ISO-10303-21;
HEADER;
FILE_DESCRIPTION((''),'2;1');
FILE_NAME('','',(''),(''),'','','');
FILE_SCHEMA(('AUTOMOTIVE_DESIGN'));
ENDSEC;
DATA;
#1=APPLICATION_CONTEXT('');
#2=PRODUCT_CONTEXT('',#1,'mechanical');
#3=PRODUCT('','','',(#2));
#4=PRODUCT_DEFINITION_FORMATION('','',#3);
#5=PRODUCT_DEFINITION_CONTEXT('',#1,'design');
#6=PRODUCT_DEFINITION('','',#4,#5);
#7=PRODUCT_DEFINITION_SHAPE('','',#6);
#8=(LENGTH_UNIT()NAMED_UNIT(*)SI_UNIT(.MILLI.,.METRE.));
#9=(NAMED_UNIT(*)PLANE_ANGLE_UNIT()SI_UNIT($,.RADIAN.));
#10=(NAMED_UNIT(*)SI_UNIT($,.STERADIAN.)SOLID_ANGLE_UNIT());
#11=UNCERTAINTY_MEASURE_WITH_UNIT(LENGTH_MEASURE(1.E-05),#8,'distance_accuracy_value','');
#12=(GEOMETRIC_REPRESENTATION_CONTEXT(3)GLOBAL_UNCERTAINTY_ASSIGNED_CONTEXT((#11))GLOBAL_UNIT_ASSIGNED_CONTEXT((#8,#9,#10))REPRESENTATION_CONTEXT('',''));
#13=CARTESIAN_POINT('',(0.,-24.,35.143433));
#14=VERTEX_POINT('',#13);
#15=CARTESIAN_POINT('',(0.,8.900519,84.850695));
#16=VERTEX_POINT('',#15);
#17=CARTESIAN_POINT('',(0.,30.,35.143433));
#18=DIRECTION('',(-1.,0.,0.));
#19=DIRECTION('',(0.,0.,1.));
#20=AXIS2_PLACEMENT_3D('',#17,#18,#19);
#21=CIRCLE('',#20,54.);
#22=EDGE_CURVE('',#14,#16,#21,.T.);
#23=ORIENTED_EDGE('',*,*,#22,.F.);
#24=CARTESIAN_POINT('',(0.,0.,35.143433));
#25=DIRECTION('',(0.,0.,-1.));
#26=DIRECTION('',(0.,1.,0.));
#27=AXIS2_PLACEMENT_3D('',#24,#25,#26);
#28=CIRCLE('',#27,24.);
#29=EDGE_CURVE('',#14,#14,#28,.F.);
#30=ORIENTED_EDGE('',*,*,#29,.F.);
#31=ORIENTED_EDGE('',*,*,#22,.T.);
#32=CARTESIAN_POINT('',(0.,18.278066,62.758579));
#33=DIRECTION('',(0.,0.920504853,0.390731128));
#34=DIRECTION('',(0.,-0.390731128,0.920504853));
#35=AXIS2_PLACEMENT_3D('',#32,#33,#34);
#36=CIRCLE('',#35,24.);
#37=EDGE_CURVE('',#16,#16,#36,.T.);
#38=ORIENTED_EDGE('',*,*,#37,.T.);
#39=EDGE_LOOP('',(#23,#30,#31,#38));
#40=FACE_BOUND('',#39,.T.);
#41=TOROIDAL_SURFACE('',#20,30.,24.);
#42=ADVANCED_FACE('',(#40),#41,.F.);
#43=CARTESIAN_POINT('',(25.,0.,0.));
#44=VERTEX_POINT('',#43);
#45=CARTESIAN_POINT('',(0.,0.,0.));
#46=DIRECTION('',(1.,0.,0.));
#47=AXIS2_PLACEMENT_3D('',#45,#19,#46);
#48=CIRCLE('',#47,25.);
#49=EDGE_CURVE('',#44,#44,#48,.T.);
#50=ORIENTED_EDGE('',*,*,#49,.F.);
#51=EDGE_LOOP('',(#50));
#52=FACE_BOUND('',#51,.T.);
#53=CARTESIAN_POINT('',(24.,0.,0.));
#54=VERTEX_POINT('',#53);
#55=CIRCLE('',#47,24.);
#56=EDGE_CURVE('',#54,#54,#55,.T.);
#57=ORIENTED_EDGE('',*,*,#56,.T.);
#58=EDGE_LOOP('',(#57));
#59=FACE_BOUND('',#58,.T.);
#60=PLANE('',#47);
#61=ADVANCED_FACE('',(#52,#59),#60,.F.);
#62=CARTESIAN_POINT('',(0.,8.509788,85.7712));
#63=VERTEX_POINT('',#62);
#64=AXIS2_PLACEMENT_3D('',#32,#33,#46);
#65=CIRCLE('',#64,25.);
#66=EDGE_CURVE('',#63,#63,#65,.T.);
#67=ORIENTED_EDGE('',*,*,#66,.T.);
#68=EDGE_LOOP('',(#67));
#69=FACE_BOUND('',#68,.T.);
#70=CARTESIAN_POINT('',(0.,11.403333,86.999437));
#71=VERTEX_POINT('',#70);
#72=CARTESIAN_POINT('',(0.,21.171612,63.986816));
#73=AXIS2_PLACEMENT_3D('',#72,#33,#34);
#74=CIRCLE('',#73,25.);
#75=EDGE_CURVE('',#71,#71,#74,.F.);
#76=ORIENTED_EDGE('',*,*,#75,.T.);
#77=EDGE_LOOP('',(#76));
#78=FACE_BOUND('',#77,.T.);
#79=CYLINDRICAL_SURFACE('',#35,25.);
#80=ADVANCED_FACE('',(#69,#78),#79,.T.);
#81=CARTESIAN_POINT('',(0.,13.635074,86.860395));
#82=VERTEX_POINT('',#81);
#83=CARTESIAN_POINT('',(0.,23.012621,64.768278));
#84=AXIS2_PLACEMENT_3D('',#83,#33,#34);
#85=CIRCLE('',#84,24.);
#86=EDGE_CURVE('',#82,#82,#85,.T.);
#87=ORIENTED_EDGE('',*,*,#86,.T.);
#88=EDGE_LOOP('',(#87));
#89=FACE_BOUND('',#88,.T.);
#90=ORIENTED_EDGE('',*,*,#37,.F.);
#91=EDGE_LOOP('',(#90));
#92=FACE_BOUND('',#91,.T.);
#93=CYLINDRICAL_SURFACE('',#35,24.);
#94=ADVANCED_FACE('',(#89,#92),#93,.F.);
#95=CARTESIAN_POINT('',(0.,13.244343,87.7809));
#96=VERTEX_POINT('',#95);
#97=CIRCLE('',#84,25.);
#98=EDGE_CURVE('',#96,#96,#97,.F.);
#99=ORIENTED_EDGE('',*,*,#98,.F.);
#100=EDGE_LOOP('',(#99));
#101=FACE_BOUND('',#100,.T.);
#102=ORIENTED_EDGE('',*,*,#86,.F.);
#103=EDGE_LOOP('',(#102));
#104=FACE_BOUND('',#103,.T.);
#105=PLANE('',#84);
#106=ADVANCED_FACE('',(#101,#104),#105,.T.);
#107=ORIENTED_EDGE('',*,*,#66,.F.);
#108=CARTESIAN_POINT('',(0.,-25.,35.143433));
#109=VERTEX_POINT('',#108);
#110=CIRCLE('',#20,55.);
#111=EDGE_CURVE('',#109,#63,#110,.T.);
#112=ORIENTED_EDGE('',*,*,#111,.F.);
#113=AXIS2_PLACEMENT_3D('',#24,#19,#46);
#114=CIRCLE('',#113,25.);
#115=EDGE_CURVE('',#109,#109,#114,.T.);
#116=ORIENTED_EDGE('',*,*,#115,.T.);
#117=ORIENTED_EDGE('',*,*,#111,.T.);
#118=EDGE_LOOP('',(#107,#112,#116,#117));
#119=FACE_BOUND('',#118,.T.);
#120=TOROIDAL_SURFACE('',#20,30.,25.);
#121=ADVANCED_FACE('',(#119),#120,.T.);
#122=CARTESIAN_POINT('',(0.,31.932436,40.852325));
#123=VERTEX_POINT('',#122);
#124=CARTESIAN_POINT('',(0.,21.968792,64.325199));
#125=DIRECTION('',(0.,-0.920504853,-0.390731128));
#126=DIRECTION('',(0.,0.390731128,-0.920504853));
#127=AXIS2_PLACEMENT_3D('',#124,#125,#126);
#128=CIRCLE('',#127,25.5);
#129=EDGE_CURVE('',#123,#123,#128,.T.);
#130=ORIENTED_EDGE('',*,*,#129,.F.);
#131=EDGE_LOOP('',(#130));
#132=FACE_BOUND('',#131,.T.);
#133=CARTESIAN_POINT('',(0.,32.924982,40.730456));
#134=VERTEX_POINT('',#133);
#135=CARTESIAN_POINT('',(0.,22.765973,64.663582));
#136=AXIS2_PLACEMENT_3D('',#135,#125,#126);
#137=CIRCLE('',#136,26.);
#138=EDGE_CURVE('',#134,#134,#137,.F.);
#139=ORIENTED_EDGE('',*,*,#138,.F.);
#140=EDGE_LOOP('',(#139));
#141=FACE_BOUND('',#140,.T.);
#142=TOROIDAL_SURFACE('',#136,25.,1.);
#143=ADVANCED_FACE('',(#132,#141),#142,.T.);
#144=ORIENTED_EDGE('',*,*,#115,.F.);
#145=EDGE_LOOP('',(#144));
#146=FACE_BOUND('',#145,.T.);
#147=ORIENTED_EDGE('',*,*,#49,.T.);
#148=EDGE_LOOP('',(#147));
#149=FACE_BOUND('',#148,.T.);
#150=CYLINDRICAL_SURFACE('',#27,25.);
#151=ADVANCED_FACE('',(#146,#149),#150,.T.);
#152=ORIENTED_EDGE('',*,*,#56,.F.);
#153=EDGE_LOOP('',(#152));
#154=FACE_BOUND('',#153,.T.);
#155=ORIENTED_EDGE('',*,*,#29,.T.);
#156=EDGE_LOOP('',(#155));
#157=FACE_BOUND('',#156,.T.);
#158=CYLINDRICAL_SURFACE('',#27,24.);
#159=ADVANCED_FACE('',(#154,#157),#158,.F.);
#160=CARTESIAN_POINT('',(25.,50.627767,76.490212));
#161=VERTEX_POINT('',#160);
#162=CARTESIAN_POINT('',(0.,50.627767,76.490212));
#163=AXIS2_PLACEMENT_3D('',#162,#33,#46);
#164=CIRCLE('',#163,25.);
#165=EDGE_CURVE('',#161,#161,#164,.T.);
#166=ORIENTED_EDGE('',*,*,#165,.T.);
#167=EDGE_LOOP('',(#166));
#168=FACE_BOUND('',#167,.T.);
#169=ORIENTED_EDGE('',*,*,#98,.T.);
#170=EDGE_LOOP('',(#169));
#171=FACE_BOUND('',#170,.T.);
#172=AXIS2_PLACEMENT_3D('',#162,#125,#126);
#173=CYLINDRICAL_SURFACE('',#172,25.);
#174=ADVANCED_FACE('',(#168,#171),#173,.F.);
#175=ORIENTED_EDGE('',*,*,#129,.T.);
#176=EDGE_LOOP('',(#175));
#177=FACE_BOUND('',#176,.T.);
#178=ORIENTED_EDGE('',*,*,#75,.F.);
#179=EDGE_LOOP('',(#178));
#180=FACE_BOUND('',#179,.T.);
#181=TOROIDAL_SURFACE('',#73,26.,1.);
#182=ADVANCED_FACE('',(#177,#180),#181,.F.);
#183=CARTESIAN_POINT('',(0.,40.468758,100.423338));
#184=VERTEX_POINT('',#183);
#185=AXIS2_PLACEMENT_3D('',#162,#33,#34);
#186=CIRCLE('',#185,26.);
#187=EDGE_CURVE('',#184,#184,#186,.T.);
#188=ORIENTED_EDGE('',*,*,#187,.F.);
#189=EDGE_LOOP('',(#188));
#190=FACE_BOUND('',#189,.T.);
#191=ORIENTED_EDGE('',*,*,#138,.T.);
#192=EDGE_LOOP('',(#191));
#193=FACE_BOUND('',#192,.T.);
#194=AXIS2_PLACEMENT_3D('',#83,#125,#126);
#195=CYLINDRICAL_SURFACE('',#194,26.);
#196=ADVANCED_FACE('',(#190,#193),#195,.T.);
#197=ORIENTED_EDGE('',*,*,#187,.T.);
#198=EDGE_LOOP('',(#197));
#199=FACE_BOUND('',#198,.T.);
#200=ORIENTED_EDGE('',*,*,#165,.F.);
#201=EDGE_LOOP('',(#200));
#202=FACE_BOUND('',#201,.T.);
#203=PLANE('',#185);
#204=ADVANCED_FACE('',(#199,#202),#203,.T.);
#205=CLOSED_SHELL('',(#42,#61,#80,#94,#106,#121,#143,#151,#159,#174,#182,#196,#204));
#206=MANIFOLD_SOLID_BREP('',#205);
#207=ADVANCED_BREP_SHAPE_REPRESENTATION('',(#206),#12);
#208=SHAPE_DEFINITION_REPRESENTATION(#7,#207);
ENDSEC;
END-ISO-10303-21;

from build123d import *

# Parameters (mm, degrees)
ESQUISSE6_R        = 25
ESQUISSE6_R_2      = 24
ESQUISSE8_R        = 26
ESQUISSE8_R_2      = 24
EXTRU_MINCE1_DEPTH = 1
EXTRU_MINCE2_START = 30
ESQUISSE9_R        = 26
ESQUISSE9_R_2      = 25
EXTRU_MINCE2_DEPTH = 30
CONG_1_R           = 1
CONG_2_R           = 1


with BuildPart() as part:
    # Balayage-Mince2: sweep along a path in Esquisse7
    with BuildLine(Plane(origin=(0, 0, 0), x_dir=(0, 0, -1), z_dir=(1, 0, 0))) as balayage_mince2_path:
        Line((0, 0), (-35.14343316412919, -3.47e-15))
        ThreePointArc((-35.14343316412919, -3.47e-15), (-51.70154272349097, 4.983425337984965), (-62.75857876770245, 18.27806614532184))
        Line((-62.75857876770245, 18.27806614532184), (-64.37754708374251, 22.092116482858586))
    # Esquisse6 → Balayage-Mince2 (sweep)
    with BuildSketch(Plane.XY):
        Circle(ESQUISSE6_R)
        Circle(ESQUISSE6_R_2, mode=Mode.SUBTRACT)
    sweep(path=balayage_mince2_path.line)



with BuildPart() as body_2:
    # Esquisse8 → Extru.-Mince1 (new body)
    with BuildSketch(Plane(origin=(0, 41.87396099217143, 17.77444189612002), x_dir=(1, 0, 0), z_dir=(0, 0.9205048534524412, 0.39073112848927183))):
        with Locations((0, -50.62776693988426)):
            Circle(ESQUISSE8_R)
        with Locations((0, -50.62776693988426)):
            Circle(ESQUISSE8_R_2, mode=Mode.SUBTRACT)
    extrude(amount=EXTRU_MINCE1_DEPTH)


with BuildPart() as part_1:
    add(part.part)

    add(body_2.part)  # Extru.-Mince2 merges body 2
    # Esquisse9 → Extru.-Mince2 (add)
    with BuildSketch(Plane(origin=(0, 42.794465845623876, 18.16517302460929), x_dir=(1, 0, 0), z_dir=(0, 0.9205048534524412, 0.39073112848927183)).offset(EXTRU_MINCE2_START)):
        with Locations((0, -50.627766939884246)):
            Circle(ESQUISSE9_R)
        with Locations((0, -50.627766939884246)):
            Circle(ESQUISSE9_R_2, mode=Mode.SUBTRACT)
    extrude(amount=-EXTRU_MINCE2_DEPTH)

    # Congé1
    cong_1_edges = [part_1.edges().sort_by_distance(p)[0] for p in [
        (-25, 22.09211648285859, 64.3775470837425),
    ]]
    fillet(cong_1_edges, radius=CONG_1_R - 0.0001)  # a hair under: the kernel refuses the full size

    # Congé2
    cong_2_edges = [part_1.edges().sort_by_distance(p)[0] for p in [
        (-26, 22.092116482858604, 64.37754708374253),
    ]]
    fillet(cong_2_edges, radius=CONG_2_R)


solid = part_1.part
